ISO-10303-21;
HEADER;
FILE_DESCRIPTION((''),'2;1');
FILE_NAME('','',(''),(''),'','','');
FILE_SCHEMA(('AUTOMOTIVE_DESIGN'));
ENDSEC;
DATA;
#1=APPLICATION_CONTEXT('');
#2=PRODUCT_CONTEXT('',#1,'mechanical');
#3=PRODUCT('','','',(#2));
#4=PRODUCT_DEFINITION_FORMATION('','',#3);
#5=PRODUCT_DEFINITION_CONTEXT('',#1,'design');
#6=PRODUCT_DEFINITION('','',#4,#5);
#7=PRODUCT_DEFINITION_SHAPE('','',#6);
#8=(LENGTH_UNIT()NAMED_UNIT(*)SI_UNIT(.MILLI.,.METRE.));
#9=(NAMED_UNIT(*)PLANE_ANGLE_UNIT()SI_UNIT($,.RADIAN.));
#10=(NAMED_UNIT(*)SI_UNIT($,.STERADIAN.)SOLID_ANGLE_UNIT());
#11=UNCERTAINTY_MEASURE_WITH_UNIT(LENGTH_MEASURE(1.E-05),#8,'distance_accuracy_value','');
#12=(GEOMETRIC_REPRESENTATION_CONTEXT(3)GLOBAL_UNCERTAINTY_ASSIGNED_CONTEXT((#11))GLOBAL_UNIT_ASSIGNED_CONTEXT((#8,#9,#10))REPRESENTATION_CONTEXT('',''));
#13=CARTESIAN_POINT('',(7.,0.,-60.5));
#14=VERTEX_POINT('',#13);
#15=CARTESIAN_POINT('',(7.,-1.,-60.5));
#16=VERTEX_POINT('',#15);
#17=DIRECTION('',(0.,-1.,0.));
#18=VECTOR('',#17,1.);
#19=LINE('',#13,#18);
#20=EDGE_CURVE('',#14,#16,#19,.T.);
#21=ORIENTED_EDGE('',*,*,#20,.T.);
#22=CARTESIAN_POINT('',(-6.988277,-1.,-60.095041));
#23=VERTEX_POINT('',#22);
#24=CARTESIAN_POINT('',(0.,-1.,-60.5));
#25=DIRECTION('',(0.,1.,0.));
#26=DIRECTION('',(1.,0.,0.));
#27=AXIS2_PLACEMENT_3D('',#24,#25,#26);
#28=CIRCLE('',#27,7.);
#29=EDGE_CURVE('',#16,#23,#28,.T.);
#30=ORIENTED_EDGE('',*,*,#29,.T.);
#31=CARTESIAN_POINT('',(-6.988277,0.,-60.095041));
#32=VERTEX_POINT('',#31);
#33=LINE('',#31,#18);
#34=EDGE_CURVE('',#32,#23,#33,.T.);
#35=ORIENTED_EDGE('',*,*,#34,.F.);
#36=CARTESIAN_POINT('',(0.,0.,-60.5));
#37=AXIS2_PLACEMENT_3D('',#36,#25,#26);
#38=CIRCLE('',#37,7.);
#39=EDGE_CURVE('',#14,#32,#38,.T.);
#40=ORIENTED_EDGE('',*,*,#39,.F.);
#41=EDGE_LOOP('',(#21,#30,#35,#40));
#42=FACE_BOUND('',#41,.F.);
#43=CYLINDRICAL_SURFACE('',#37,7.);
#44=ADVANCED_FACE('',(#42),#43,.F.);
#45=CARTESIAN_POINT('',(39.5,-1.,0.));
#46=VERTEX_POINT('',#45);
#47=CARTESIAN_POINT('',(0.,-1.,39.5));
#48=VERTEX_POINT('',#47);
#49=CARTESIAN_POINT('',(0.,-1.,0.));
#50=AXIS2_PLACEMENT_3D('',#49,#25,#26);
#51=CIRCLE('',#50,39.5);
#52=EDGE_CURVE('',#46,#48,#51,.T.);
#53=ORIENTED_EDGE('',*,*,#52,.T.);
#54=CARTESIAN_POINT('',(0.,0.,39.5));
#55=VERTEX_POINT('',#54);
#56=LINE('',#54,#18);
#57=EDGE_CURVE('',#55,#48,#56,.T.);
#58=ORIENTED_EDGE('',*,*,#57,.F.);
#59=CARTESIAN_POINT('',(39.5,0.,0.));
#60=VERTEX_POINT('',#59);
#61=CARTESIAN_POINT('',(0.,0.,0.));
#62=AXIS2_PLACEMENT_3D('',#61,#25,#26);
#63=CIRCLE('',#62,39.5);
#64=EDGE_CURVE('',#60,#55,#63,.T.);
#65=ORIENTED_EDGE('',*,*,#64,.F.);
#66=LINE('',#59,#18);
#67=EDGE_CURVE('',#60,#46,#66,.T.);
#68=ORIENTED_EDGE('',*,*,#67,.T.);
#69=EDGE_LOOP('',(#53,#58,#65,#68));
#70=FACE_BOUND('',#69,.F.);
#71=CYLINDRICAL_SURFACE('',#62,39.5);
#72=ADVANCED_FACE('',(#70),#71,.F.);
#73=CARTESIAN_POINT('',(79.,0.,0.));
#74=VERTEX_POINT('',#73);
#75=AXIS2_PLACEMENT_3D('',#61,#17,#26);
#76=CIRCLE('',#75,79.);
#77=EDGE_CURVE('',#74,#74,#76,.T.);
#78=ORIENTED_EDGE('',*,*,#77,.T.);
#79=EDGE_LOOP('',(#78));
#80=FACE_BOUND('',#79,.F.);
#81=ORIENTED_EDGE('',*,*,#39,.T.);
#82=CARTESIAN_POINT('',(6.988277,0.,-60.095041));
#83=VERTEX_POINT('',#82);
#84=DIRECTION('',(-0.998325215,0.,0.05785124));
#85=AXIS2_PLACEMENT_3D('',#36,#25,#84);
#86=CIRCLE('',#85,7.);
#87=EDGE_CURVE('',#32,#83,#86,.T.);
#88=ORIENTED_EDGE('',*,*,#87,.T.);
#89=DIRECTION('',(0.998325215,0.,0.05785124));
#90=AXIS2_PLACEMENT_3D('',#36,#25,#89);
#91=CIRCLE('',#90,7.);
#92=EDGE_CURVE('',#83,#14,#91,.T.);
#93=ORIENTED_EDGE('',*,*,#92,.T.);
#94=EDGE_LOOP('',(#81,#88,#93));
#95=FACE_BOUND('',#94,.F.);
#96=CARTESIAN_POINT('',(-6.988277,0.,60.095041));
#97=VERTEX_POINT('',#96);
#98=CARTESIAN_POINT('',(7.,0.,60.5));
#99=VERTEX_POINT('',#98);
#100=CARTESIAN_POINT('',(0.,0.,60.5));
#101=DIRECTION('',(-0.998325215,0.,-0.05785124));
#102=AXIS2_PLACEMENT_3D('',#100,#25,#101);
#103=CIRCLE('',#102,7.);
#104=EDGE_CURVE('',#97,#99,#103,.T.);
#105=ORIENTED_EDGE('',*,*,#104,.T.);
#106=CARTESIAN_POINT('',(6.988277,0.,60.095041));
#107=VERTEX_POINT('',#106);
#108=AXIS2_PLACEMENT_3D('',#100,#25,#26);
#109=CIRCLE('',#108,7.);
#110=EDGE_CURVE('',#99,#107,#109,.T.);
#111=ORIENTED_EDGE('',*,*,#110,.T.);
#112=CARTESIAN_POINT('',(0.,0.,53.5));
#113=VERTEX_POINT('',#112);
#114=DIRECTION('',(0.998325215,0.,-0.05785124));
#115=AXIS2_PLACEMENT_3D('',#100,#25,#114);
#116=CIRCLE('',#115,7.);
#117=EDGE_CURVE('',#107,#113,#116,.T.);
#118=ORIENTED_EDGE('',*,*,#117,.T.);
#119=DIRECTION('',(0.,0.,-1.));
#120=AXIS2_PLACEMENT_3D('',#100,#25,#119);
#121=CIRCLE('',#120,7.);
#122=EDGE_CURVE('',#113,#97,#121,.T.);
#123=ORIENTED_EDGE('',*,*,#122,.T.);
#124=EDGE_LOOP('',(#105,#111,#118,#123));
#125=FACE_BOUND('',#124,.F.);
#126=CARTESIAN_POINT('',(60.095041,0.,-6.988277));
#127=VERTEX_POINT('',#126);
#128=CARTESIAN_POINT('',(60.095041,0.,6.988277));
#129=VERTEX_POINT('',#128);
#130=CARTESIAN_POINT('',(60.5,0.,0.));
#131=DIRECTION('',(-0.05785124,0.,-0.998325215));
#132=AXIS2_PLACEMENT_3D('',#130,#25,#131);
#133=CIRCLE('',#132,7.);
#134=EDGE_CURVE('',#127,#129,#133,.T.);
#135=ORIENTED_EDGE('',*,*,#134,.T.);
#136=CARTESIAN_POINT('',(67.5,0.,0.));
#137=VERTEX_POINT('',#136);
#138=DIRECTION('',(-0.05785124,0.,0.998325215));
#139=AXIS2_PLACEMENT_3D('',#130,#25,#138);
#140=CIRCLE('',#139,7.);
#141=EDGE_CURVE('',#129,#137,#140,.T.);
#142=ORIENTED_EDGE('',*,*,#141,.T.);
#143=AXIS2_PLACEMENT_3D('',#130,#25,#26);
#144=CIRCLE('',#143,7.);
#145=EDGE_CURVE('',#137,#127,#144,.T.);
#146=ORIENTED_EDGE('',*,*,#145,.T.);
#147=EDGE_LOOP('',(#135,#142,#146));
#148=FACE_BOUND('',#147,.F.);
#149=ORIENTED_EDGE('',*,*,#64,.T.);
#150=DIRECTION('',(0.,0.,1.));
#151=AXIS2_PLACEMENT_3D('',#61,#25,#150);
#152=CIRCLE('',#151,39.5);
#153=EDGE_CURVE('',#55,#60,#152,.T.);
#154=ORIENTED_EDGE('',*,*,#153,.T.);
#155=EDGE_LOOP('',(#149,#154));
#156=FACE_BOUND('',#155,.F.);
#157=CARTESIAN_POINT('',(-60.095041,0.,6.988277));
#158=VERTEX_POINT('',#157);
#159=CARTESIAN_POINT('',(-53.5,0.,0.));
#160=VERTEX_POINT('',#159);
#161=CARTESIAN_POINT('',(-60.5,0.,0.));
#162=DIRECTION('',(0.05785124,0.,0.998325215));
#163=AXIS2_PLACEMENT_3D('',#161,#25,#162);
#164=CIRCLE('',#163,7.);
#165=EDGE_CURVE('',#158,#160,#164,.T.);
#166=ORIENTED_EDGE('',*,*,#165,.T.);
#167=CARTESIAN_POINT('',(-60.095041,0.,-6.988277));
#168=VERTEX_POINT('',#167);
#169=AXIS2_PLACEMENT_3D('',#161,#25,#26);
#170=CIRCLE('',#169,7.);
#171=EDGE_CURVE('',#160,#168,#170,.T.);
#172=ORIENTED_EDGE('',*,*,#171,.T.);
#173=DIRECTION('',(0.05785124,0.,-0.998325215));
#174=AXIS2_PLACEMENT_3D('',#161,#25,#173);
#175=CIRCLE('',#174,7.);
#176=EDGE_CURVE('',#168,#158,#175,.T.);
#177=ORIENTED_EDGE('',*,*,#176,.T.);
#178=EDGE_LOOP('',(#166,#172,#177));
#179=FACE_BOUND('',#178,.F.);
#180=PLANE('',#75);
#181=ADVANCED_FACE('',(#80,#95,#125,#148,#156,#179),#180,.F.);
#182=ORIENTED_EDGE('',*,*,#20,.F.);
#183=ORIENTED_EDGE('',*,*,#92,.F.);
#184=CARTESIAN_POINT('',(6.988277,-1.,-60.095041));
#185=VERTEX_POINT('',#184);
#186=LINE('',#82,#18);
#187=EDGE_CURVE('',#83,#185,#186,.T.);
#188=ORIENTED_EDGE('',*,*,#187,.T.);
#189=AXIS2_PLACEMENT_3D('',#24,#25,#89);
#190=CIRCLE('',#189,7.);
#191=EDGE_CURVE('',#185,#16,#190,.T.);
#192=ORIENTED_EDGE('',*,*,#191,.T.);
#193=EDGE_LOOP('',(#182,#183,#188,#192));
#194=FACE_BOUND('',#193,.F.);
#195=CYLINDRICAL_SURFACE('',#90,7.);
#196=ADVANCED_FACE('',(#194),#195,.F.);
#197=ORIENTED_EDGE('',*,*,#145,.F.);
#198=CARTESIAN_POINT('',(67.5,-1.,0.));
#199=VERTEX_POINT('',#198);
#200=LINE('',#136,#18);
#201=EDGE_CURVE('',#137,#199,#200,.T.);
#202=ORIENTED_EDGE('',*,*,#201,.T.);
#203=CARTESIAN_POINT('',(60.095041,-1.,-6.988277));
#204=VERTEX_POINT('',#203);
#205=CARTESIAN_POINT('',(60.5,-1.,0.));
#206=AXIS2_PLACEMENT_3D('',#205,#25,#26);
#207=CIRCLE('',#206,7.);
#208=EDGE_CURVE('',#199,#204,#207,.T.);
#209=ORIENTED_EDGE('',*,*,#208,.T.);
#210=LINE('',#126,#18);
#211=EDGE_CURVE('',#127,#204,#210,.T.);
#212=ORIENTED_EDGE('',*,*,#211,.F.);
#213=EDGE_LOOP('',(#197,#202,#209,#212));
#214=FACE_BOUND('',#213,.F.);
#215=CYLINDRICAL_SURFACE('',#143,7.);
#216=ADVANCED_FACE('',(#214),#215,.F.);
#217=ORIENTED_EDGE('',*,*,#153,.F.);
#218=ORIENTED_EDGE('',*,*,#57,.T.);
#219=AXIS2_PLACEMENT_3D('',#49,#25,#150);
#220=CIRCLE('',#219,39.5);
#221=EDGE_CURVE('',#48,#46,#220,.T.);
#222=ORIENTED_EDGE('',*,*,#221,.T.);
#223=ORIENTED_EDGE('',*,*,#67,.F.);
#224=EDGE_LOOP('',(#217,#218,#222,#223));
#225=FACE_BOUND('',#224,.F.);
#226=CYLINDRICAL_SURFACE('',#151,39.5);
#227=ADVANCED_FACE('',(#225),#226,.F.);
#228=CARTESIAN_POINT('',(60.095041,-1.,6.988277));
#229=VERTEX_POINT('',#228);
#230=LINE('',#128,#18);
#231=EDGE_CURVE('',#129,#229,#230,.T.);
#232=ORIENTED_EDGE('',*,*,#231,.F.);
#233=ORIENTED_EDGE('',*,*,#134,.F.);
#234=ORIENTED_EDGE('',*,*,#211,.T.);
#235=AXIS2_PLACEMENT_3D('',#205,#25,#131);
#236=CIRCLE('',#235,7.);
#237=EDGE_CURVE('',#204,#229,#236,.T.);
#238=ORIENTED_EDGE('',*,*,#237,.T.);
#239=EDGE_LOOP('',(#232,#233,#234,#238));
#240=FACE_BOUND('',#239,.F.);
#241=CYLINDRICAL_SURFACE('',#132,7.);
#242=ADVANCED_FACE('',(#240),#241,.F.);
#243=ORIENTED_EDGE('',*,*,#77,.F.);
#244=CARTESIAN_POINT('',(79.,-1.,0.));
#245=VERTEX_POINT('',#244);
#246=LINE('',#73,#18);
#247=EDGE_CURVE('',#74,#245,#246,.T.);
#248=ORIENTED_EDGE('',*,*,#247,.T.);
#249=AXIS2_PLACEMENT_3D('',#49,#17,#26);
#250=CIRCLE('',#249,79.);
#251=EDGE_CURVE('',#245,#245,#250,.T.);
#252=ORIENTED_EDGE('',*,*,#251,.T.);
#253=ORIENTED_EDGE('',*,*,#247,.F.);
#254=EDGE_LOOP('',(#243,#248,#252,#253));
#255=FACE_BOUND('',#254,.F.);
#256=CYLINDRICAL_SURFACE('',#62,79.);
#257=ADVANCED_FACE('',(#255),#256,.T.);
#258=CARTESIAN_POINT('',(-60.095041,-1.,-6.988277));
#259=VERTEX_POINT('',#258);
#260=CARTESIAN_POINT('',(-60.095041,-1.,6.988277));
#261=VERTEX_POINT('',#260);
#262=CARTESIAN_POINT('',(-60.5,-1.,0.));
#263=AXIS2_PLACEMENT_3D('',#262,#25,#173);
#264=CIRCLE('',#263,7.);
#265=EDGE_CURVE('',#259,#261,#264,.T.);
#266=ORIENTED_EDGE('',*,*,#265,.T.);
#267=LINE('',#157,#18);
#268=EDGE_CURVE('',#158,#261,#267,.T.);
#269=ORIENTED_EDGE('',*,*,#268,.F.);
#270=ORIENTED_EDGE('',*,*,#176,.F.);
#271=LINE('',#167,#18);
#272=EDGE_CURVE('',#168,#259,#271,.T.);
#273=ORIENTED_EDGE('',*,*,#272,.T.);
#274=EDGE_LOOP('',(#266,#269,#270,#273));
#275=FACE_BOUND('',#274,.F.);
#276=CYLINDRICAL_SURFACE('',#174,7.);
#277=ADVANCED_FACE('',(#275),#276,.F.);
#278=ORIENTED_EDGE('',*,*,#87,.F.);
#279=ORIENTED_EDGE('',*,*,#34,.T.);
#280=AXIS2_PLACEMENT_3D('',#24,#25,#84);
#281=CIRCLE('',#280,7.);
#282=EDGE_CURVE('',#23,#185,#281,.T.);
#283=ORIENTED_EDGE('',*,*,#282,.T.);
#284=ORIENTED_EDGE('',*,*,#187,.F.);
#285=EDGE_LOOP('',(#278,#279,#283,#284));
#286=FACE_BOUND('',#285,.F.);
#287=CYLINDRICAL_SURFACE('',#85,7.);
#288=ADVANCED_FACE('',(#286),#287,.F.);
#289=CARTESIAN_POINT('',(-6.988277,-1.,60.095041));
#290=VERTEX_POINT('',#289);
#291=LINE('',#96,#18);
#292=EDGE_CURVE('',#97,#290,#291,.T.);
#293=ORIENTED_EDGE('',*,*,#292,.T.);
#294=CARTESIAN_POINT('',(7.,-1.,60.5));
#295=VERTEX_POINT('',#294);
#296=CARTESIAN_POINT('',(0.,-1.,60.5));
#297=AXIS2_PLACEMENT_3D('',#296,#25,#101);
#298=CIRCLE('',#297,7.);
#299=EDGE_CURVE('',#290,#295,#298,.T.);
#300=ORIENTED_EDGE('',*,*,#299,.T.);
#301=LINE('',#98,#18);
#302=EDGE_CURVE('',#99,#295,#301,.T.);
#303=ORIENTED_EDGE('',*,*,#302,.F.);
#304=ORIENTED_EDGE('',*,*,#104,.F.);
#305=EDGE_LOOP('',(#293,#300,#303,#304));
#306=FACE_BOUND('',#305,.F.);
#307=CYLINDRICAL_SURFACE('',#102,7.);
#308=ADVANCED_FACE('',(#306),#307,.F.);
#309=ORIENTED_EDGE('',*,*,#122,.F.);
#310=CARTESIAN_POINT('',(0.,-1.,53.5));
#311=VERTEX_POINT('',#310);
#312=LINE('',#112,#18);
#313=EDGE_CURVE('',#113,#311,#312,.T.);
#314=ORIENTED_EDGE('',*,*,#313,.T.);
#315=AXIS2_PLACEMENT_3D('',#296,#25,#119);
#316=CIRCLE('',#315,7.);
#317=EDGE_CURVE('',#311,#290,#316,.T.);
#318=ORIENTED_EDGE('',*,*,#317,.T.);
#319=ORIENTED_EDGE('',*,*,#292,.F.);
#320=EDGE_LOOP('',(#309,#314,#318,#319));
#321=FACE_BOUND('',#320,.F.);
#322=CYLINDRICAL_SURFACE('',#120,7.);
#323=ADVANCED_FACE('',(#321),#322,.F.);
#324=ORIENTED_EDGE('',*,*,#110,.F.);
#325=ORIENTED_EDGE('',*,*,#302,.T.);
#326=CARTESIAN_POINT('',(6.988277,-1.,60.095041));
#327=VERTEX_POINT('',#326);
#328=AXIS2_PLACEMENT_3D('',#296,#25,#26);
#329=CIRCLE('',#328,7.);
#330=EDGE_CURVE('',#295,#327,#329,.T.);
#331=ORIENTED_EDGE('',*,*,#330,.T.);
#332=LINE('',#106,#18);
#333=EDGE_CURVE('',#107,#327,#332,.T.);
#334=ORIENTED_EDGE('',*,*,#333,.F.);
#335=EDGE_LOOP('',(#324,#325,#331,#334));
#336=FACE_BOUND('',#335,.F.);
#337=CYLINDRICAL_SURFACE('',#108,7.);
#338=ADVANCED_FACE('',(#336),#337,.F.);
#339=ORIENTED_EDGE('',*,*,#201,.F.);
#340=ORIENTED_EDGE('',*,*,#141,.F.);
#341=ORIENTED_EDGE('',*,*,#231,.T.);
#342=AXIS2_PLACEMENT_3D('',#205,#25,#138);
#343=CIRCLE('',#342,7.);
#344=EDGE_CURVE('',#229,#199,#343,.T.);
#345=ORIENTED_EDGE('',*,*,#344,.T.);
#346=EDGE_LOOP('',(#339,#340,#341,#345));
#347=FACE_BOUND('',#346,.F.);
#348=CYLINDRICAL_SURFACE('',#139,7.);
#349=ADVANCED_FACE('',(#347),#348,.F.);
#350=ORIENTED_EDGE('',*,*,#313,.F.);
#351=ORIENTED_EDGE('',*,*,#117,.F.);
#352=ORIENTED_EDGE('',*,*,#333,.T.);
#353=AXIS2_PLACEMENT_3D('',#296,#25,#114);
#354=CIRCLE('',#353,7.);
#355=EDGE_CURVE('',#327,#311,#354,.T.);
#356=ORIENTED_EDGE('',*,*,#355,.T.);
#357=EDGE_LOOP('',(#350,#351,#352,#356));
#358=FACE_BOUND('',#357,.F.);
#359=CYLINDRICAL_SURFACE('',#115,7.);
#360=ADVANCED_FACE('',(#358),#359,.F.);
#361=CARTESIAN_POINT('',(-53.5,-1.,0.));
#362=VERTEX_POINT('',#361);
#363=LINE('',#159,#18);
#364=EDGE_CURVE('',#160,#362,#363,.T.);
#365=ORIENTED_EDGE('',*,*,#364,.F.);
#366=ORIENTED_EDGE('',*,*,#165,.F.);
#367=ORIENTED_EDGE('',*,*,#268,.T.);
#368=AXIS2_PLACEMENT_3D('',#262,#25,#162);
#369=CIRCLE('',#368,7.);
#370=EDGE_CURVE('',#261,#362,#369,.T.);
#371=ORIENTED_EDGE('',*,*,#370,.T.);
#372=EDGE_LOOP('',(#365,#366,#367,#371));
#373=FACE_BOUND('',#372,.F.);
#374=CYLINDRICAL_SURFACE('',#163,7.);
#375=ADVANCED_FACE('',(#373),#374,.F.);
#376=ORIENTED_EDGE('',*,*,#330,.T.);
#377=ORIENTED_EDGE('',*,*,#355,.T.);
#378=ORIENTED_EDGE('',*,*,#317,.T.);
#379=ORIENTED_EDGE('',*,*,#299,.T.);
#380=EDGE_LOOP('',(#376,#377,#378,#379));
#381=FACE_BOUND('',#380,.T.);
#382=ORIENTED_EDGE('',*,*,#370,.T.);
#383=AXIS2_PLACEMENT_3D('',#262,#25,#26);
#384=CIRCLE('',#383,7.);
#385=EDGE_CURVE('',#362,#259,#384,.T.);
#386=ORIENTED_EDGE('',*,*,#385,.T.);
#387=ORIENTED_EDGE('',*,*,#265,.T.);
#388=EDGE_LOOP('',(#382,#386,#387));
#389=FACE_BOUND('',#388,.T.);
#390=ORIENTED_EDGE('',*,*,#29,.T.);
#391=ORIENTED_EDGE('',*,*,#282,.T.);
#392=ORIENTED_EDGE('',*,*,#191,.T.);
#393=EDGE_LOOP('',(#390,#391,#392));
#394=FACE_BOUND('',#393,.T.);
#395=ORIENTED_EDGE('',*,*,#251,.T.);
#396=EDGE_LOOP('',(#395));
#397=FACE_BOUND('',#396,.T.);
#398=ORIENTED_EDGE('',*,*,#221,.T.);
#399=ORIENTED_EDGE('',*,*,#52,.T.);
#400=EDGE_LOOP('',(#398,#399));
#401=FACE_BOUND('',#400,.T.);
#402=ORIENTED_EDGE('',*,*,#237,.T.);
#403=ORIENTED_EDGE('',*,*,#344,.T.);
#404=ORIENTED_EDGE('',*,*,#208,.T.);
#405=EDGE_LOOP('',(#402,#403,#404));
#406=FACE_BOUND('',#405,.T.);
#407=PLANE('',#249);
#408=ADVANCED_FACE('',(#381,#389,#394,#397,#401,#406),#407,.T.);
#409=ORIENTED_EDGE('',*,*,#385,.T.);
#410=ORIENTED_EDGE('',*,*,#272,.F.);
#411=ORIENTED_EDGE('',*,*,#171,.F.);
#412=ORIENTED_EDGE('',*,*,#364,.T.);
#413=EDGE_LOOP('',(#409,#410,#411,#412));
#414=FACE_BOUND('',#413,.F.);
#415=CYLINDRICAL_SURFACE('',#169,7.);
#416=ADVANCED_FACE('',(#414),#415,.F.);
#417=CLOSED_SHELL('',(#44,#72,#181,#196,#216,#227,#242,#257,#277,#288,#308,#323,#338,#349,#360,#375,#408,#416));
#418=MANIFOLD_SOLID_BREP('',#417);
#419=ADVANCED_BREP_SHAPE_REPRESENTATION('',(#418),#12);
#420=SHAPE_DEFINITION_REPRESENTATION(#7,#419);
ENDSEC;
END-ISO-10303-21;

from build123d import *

# Parameters (mm, degrees)
F0_R     = 79
F1_DEPTH = 1


with BuildPart() as f1:
    # F0 (on Front) → F1 (new body)
    with BuildSketch(Plane.XZ):
        Circle(F0_R)
        with BuildLine():
            ThreePointArc((6.9882765021, 60.0950413223), (42.7799602618, 42.7799602618), (60.0950413223, 6.9882765021))
            ThreePointArc((60.0950413223, 6.9882765021), (65.3044400952, 5.0909090909), (67.5, 0))
            ThreePointArc((67.5, 0), (65.3044400952, -5.0909090909), (60.0950413223, -6.9882765021))
            ThreePointArc((60.0950413223, -6.9882765021), (42.7799602618, -42.7799602618), (6.9882765021, -60.0950413223))
            ThreePointArc((6.9882765021, -60.0950413223), (6.9970685117, -60.2974358305), (7, -60.5))
            ThreePointArc((7, -60.5), (-0.2025641695, -67.4970685117), (-6.9882765021, -60.0950413223))
            ThreePointArc((-6.9882765021, -60.0950413223), (-42.7799602618, -42.7799602618), (-60.0950413223, -6.9882765021))
            ThreePointArc((-60.0950413223, -6.9882765021), (-67.5, 0), (-60.0950413223, 6.9882765021))
            ThreePointArc((-60.0950413223, 6.9882765021), (-42.7799602618, 42.7799602618), (-6.9882765021, 60.0950413223))
            ThreePointArc((-6.9882765021, 60.0950413223), (-0.2025641695, 67.4970685117), (7, 60.5))
            ThreePointArc((7, 60.5), (6.9970685117, 60.2974358305), (6.9882765021, 60.0950413223))
        make_face(mode=Mode.SUBTRACT)
        with BuildLine():
            ThreePointArc((60.0950413223, -6.9882765021), (53.5, 0), (60.0950413223, 6.9882765021))
            ThreePointArc((60.0950413223, 6.9882765021), (42.7799602618, 42.7799602618), (6.9882765021, 60.0950413223))
            ThreePointArc((6.9882765021, 60.0950413223), (4.8044400952, 55.4090909091), (0, 53.5))
            ThreePointArc((0, 53.5), (-4.8044400952, 55.4090909091), (-6.9882765021, 60.0950413223))
            ThreePointArc((-6.9882765021, 60.0950413223), (-42.7799602618, 42.7799602618), (-60.0950413223, 6.9882765021))
            ThreePointArc((-60.0950413223, 6.9882765021), (-55.4090909091, 4.8044400952), (-53.5, 0))
            ThreePointArc((-53.5, 0), (-55.4090909091, -4.8044400952), (-60.0950413223, -6.9882765021))
            ThreePointArc((-60.0950413223, -6.9882765021), (-42.7799602618, -42.7799602618), (-6.9882765021, -60.0950413223))
            ThreePointArc((-6.9882765021, -60.0950413223), (0, -53.5), (6.9882765021, -60.0950413223))
            ThreePointArc((6.9882765021, -60.0950413223), (42.7799602618, -42.7799602618), (60.0950413223, -6.9882765021))
        make_face()
        with BuildLine():
            ThreePointArc((39.5, 0), (-27.9307178569, -27.9307178569), (0, 39.5))
            ThreePointArc((0, 39.5), (27.9307178569, 27.9307178569), (39.5, 0))
        make_face(mode=Mode.SUBTRACT)
    extrude(amount=F1_DEPTH)


solid = f1.part
